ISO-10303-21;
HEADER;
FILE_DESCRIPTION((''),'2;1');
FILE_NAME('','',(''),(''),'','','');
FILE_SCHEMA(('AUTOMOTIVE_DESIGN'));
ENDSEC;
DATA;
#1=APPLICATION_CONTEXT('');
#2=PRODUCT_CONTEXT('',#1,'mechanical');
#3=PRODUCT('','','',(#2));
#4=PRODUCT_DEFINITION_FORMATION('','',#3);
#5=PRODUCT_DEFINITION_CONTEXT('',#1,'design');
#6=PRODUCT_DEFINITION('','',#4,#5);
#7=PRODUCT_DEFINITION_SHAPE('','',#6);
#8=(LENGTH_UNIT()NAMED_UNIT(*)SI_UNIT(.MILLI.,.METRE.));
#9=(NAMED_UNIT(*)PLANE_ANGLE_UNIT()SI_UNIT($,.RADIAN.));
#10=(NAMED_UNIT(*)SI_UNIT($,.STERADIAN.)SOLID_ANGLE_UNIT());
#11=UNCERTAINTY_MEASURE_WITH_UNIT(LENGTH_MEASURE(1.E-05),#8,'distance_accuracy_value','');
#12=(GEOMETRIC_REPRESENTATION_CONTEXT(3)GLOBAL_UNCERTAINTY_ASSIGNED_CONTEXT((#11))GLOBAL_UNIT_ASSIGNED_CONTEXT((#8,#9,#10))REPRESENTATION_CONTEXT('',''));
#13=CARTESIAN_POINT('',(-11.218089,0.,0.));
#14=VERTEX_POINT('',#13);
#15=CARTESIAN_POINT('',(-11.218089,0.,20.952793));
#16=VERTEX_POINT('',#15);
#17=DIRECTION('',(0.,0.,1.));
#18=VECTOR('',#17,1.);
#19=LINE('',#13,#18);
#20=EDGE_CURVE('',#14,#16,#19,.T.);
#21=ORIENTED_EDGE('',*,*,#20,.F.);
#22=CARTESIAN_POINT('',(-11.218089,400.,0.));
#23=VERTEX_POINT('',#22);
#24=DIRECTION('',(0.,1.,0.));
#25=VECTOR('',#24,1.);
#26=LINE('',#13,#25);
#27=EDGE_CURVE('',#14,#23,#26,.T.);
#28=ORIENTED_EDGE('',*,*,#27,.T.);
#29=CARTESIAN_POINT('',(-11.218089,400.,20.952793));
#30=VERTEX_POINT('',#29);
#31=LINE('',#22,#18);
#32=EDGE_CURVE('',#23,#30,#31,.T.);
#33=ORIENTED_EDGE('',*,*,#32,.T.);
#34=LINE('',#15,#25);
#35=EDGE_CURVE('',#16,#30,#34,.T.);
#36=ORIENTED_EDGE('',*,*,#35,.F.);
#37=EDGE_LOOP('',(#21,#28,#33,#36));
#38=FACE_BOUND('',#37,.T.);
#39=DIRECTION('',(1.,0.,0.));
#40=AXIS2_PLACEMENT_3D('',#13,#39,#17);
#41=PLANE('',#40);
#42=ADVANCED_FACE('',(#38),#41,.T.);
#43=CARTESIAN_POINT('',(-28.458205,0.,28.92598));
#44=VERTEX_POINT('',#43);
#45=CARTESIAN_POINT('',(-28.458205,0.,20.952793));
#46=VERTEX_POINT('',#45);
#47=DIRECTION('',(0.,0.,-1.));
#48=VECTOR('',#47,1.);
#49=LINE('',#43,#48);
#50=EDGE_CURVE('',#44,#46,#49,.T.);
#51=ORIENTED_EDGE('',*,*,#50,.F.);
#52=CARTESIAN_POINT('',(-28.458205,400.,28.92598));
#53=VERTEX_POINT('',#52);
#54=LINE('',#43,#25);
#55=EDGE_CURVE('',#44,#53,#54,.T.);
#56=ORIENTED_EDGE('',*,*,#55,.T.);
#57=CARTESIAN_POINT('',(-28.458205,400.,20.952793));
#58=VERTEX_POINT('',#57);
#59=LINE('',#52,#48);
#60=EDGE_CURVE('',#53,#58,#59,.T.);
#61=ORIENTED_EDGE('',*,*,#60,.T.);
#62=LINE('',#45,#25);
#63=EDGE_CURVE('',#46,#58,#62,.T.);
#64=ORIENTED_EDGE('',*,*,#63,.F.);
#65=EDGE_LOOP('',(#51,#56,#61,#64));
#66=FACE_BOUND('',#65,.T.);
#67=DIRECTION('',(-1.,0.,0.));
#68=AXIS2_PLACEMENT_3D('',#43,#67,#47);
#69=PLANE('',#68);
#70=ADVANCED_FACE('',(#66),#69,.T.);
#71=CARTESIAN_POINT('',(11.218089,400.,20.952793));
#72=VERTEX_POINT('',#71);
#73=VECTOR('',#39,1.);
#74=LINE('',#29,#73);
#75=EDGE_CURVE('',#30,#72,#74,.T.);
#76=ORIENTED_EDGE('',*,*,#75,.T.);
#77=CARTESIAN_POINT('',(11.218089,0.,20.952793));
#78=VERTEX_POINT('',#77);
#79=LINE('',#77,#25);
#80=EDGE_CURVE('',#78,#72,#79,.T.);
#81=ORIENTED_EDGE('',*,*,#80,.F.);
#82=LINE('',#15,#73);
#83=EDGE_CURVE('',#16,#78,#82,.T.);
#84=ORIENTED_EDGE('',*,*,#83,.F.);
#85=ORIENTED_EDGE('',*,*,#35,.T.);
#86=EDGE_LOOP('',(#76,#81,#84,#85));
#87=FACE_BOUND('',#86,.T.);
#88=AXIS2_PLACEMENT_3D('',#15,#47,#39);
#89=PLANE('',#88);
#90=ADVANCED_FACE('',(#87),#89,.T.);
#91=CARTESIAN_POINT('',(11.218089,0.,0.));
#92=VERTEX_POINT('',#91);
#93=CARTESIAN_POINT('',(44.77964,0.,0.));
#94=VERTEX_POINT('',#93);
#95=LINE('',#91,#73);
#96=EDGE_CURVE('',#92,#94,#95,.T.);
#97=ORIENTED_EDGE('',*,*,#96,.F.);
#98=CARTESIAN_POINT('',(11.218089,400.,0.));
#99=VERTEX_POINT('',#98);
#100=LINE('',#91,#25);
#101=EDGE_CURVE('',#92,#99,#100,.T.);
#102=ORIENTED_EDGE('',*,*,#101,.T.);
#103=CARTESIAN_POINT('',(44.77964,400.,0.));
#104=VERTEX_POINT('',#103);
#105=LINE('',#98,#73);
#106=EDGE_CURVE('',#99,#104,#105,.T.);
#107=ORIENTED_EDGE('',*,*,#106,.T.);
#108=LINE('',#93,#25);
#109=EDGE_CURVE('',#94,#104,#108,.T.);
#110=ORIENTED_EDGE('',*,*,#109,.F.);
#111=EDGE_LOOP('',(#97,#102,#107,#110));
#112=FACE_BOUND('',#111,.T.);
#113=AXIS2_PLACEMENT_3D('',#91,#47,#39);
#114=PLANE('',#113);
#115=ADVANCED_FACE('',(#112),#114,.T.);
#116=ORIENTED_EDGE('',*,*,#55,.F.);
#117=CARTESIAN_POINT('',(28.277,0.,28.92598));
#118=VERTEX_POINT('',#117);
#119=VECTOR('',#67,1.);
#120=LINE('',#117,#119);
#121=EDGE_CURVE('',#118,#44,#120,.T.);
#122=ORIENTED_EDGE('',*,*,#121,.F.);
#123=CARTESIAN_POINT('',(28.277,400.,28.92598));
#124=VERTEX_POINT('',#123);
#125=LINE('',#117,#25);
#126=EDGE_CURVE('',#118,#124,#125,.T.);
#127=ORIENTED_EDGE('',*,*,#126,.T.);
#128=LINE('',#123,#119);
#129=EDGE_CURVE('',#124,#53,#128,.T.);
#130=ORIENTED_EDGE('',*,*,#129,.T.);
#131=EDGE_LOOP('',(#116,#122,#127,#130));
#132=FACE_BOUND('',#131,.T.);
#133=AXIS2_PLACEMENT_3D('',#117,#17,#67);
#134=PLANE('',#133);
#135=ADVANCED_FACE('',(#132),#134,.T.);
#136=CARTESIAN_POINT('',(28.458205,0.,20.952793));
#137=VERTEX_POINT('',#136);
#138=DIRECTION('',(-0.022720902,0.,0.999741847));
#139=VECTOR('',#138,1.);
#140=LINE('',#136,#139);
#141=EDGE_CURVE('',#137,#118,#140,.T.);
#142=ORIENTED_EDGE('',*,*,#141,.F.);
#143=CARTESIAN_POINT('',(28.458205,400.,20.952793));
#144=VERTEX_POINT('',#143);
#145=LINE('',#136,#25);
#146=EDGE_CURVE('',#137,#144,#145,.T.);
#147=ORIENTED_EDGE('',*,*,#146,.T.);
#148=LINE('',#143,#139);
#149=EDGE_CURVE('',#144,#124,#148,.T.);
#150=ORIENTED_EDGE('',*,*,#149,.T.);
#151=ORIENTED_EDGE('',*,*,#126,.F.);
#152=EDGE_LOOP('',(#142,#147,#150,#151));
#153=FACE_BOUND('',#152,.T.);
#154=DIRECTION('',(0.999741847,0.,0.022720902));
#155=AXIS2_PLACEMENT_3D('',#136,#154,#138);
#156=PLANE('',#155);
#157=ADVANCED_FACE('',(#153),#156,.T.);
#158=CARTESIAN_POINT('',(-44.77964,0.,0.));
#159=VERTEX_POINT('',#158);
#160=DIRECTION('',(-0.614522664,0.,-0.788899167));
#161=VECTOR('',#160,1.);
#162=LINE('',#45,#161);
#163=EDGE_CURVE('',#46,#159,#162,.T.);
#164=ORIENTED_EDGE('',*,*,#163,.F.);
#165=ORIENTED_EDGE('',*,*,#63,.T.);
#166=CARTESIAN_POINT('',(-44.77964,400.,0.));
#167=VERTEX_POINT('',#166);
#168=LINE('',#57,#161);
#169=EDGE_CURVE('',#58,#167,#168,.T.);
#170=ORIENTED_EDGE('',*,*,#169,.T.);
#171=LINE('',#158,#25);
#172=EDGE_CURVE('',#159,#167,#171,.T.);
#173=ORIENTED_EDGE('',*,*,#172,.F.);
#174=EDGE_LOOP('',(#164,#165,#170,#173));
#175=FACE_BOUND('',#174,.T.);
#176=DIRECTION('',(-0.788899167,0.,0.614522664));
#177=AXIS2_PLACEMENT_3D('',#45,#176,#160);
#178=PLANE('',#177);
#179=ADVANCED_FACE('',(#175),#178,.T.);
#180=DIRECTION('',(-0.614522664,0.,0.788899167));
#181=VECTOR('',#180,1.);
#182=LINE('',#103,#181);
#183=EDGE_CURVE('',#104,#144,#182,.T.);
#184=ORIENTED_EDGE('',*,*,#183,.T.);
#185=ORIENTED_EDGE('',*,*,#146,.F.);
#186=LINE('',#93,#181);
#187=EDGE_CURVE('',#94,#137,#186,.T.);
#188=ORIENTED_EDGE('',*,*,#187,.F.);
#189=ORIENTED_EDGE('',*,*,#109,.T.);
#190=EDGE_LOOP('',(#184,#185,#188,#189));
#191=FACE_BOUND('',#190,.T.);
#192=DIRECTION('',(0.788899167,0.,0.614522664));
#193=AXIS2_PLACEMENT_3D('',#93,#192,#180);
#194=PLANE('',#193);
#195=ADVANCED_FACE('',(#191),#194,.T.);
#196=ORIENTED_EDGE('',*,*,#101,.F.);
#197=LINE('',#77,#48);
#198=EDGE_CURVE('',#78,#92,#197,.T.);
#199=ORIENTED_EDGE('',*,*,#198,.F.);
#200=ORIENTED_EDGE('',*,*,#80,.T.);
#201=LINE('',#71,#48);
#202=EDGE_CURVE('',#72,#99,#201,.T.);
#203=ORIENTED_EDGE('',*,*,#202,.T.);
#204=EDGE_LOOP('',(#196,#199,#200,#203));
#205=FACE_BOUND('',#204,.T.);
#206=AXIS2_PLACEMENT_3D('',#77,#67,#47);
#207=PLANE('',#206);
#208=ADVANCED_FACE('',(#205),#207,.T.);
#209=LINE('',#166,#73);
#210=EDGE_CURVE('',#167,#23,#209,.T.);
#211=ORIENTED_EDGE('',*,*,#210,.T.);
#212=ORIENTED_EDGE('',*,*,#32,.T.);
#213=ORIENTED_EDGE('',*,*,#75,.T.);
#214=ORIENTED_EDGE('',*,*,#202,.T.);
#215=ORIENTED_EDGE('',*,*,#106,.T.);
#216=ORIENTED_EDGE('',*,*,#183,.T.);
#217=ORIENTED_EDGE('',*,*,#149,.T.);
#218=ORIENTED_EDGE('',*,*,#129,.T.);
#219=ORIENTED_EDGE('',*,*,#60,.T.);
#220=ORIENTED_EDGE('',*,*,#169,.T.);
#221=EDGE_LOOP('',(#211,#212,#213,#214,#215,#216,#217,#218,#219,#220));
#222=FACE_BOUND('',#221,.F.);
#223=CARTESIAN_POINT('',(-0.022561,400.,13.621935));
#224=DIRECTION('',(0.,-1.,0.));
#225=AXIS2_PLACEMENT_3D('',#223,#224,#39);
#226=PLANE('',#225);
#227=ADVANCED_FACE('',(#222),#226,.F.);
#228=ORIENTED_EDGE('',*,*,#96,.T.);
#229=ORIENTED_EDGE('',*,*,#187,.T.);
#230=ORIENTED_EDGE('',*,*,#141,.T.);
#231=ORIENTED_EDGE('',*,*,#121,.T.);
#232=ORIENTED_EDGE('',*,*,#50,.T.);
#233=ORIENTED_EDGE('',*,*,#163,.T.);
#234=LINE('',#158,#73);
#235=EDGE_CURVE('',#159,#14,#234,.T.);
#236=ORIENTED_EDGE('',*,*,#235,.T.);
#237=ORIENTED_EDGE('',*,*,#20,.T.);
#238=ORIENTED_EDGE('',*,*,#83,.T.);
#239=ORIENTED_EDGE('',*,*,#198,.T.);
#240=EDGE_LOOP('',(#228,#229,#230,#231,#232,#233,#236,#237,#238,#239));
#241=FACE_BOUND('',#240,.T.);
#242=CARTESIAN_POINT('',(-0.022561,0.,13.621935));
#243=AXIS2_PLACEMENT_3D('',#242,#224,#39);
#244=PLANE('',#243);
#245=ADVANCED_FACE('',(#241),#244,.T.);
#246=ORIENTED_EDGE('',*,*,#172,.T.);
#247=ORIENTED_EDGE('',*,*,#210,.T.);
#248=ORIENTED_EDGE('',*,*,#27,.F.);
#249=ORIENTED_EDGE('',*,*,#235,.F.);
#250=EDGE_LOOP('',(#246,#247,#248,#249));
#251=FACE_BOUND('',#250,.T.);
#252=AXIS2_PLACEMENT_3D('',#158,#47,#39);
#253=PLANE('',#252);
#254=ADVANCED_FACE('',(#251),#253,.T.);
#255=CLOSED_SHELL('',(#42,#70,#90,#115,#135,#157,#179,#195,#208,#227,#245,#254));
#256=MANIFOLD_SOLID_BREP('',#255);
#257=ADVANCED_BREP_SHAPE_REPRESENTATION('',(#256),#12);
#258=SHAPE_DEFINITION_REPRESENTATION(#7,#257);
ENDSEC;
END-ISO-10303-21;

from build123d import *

# Parameters (mm, degrees)
F1_DEPTH = 400


# Not quite as in the source:
# - a feature names something its author has since deleted; it is built from what else it names


with BuildPart() as f1:
    # F0 (on Front) → F1 (new body)
    with BuildSketch(Plane.XZ):
        Polygon((11.218088679, 20.9527928382), (11.218088679, 0), (28.4624192864, 0), (44.7796396911, 0), (28.4582051874, 20.9527928382), (28.2770004123, 28.9259795099), (-28.4582051874, 28.9259795099), (-28.4582051874, 20.9527928382), (-44.7796396911, 0), (-28.4624192864, 0), (-11.218088679, 0), (-11.218088679, 20.9527928382), align=None)
    extrude(amount=-F1_DEPTH)


solid = f1.part
